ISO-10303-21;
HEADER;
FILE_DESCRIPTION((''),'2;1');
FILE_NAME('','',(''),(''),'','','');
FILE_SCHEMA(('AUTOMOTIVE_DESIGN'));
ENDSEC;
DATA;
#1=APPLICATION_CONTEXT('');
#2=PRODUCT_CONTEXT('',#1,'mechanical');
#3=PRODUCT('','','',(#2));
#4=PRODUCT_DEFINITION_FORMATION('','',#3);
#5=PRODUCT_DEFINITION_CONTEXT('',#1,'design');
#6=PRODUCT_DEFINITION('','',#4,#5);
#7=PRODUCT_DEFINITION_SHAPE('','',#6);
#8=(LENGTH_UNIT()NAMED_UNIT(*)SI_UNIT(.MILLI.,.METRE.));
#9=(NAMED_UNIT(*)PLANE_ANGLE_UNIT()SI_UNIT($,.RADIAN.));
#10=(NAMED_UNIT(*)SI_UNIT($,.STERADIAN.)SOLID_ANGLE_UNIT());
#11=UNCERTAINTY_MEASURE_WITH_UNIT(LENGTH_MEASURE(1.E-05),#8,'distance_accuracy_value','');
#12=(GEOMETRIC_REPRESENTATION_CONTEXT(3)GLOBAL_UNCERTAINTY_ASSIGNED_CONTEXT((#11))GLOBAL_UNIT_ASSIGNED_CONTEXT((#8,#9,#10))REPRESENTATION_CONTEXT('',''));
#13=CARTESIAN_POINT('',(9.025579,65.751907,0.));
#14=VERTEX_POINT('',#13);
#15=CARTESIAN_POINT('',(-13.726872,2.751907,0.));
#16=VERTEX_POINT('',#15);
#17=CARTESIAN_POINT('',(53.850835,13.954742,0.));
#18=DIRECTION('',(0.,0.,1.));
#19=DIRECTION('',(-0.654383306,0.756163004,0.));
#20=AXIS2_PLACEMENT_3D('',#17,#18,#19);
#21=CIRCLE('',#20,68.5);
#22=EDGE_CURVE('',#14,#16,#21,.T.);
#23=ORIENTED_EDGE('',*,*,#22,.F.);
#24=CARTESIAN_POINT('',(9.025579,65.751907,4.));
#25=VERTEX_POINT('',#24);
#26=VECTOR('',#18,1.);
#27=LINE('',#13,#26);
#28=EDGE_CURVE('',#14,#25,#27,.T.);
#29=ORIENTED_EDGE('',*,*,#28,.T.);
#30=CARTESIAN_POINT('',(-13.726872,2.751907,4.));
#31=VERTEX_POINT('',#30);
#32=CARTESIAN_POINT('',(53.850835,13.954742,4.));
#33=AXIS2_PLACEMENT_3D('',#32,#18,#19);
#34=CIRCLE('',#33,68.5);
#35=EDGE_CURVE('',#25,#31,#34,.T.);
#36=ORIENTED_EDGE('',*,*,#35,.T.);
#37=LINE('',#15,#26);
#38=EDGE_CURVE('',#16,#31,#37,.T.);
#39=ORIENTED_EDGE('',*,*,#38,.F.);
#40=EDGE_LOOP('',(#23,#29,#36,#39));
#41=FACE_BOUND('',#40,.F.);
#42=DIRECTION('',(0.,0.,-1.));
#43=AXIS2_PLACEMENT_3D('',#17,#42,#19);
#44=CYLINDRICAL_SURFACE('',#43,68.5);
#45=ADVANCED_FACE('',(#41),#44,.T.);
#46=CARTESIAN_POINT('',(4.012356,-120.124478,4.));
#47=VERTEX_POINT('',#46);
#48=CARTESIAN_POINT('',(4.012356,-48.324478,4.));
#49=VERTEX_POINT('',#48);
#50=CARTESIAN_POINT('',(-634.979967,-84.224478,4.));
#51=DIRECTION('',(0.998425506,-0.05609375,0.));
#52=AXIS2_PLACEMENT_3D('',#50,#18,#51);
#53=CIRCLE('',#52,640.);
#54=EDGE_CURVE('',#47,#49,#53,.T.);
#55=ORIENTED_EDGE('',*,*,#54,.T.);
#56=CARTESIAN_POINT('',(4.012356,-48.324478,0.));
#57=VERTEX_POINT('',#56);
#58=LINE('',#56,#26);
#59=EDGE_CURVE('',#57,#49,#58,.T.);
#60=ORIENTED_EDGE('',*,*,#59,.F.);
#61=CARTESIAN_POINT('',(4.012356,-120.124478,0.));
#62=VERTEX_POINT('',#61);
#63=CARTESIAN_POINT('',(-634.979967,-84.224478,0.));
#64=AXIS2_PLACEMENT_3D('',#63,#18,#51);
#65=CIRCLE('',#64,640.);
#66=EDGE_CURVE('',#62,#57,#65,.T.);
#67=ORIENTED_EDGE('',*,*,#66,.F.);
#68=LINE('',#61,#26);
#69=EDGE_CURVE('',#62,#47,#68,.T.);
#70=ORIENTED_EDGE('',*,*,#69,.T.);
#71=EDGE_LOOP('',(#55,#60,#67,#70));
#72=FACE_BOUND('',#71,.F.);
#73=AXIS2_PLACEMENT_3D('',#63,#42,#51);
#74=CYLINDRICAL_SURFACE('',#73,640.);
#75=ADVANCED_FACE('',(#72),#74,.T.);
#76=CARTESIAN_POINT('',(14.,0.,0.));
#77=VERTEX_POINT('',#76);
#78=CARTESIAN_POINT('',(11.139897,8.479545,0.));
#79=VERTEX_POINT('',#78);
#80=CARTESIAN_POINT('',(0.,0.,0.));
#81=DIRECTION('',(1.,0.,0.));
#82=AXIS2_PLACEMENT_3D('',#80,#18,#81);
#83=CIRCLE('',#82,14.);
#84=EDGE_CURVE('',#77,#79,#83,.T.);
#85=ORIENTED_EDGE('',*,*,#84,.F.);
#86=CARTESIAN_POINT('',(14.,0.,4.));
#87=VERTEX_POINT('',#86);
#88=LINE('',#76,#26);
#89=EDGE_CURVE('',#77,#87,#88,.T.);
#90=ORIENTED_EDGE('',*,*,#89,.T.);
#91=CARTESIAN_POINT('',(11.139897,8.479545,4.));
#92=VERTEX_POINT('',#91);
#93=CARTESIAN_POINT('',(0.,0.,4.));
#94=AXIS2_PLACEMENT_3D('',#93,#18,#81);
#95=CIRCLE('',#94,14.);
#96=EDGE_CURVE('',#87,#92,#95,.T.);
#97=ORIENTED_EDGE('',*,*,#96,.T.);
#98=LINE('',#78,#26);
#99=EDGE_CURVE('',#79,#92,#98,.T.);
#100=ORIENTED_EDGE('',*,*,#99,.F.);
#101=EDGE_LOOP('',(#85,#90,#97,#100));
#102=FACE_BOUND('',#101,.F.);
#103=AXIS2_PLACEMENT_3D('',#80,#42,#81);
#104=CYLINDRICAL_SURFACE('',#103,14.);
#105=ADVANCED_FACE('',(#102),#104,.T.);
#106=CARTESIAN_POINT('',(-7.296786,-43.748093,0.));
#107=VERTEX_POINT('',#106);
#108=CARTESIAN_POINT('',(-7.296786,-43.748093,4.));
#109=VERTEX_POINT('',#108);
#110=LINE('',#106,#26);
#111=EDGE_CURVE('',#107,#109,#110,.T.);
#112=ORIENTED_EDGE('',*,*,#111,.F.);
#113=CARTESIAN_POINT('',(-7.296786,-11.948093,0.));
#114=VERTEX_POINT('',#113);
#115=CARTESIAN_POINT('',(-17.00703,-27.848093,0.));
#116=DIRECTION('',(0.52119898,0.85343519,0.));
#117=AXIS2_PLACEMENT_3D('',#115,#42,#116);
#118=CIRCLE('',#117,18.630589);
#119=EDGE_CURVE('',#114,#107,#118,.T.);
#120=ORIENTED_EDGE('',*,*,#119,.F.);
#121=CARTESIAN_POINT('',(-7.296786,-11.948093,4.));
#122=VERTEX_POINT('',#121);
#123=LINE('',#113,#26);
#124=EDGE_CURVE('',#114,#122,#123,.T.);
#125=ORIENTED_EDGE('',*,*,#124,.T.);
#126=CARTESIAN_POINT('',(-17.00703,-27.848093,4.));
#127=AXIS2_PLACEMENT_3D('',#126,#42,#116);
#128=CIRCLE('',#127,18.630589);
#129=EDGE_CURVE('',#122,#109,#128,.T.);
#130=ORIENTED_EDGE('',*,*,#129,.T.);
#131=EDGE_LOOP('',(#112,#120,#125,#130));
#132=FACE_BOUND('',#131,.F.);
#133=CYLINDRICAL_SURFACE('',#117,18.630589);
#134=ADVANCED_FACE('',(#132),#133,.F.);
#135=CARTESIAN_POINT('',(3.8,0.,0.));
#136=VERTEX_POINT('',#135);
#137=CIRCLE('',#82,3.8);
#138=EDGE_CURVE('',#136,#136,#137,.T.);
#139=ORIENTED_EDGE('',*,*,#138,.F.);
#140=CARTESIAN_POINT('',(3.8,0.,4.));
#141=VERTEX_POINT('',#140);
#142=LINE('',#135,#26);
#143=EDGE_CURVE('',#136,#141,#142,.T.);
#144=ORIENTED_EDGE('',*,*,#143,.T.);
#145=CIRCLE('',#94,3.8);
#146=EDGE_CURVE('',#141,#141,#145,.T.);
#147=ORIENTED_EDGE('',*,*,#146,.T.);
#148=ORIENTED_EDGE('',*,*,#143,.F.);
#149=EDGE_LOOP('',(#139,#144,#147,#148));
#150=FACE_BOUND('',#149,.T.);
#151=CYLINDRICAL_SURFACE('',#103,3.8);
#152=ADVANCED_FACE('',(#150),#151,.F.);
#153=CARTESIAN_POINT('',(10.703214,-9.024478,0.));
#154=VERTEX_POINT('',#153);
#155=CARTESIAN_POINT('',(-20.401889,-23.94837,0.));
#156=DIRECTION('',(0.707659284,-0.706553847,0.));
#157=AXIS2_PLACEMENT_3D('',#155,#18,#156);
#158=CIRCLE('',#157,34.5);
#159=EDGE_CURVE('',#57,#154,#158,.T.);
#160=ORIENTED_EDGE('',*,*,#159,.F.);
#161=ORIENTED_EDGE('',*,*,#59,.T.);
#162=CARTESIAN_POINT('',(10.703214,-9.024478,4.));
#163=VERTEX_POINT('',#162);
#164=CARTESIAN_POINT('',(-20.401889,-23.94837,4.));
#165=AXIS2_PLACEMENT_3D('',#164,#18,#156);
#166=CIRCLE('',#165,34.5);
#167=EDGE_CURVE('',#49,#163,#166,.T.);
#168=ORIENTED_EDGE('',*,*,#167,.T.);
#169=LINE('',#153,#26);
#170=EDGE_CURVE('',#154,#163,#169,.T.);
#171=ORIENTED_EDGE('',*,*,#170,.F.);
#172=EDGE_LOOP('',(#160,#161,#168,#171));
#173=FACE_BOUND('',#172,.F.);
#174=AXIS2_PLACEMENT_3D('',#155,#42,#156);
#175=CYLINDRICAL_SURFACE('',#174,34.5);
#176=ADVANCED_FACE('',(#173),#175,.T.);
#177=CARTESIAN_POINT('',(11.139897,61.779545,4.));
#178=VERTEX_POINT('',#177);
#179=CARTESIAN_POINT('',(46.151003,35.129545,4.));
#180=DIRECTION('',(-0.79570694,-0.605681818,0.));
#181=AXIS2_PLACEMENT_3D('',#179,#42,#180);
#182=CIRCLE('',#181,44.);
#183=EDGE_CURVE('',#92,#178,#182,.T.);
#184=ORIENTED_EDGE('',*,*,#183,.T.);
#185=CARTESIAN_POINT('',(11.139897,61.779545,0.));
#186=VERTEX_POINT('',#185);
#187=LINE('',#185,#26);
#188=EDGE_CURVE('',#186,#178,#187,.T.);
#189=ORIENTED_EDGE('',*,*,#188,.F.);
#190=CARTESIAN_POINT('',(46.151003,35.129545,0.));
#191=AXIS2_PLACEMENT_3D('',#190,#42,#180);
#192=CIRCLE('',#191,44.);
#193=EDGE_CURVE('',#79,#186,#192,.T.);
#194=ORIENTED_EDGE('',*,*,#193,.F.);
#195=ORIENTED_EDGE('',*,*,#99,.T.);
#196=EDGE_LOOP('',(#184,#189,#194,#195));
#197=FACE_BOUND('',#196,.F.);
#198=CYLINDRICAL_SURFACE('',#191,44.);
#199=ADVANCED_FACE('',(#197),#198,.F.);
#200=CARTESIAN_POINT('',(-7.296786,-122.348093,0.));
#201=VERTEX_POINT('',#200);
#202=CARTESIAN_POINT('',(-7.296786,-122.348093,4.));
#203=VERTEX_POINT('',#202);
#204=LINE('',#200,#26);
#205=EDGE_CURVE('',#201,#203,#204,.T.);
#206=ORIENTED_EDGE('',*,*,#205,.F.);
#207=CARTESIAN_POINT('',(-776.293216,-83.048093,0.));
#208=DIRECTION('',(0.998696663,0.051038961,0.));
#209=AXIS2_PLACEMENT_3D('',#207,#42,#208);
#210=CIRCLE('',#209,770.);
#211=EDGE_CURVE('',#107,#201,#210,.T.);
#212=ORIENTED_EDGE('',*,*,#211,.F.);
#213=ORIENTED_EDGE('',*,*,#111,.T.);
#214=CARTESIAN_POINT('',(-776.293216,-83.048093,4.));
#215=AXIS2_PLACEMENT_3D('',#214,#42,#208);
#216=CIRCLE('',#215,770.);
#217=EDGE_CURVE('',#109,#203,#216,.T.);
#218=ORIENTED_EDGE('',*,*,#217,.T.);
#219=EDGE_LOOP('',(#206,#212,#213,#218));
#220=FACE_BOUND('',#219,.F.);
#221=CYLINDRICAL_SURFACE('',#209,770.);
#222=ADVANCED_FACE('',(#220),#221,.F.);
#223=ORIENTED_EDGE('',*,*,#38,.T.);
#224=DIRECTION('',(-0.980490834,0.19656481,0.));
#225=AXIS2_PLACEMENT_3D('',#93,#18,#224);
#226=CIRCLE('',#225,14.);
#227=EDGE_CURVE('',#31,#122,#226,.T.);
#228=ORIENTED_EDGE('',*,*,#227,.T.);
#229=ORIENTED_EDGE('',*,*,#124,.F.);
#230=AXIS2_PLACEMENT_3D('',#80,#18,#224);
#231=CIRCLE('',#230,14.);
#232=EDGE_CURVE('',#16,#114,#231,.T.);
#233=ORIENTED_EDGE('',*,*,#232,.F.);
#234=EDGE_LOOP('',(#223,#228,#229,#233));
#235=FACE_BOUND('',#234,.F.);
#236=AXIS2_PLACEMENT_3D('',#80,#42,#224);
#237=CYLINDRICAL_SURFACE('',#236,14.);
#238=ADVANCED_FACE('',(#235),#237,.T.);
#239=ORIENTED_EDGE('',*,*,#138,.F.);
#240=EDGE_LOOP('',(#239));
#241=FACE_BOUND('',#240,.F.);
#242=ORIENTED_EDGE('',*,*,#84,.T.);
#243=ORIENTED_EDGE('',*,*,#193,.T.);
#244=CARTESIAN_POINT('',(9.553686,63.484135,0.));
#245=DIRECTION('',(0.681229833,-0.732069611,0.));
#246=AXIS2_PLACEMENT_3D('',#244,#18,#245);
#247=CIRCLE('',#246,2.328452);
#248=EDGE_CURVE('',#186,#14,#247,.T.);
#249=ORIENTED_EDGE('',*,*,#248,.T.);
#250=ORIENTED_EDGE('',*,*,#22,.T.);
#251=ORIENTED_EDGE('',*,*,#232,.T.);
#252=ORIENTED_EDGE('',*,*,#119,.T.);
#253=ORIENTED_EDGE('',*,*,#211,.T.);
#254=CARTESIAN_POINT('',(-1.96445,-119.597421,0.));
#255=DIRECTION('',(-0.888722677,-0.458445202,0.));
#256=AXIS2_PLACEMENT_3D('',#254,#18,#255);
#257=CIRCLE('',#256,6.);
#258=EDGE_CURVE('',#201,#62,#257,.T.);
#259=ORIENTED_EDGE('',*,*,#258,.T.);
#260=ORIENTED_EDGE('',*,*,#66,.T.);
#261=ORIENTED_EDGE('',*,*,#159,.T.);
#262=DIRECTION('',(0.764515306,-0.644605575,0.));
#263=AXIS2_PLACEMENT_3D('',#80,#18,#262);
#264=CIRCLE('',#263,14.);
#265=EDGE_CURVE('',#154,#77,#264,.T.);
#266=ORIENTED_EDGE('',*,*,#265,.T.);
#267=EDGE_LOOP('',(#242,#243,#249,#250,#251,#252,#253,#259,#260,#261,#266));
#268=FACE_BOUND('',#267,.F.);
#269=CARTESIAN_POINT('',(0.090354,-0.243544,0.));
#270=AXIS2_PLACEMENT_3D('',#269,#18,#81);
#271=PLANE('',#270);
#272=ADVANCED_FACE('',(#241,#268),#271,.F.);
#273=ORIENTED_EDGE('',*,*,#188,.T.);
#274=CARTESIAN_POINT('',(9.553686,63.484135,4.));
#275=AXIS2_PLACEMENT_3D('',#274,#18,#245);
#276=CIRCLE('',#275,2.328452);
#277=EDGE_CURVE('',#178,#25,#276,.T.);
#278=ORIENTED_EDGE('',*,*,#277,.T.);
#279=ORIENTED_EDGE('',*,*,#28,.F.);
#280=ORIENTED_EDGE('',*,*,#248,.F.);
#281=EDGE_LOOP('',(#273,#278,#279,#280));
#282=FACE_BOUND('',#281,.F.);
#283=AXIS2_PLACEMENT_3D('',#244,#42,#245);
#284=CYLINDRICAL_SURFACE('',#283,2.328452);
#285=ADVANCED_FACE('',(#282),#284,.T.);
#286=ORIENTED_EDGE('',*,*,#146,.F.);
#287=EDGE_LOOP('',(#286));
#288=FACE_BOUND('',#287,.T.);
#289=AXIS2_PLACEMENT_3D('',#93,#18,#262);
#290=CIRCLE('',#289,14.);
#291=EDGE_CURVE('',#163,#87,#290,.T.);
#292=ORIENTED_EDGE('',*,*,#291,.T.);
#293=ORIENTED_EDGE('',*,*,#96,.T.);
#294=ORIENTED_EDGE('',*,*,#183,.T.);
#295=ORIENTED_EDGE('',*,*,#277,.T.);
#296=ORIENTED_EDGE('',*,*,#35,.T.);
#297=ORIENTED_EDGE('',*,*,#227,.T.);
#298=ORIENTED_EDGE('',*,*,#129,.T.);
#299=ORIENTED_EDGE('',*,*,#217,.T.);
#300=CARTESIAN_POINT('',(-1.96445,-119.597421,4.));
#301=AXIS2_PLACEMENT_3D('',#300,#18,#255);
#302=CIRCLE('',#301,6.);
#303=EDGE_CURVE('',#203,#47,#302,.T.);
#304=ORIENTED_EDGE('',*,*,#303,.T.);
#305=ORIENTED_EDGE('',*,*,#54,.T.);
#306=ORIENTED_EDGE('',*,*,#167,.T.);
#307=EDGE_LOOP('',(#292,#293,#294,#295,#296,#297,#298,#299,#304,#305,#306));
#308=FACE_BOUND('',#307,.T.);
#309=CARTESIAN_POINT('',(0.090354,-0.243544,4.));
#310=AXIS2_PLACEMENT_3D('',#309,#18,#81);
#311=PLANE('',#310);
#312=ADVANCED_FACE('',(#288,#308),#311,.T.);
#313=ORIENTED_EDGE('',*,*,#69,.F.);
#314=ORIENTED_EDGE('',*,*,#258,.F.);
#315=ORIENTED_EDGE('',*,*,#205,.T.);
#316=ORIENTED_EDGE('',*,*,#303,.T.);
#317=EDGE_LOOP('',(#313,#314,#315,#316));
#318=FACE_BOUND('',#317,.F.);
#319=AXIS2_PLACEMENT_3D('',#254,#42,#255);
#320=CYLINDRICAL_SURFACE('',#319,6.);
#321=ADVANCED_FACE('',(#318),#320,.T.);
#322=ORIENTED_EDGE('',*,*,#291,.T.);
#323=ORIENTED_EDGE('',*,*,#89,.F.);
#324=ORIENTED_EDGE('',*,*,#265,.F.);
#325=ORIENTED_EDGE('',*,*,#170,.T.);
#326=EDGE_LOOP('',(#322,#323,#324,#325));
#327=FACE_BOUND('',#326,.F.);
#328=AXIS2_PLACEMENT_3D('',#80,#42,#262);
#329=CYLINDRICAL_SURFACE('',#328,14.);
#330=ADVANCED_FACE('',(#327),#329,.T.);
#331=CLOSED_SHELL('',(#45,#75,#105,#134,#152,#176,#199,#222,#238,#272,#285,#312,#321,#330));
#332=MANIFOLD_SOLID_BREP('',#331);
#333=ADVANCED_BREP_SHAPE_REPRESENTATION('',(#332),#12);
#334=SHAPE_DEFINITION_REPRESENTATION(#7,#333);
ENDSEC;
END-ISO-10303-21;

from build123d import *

# Parameters (mm, degrees)
F0_R     = 3.8
F1_DEPTH = 4


# Not quite as in the source:
# - a feature names something its author has since deleted; it is built from what else it names


with BuildPart() as f1:
    # F0 (on Top) → F1 (new body)
    with BuildSketch(Plane.XY):
        with BuildLine():
            ThreePointArc((10.7032142857, -9.0244780433), (13.15, -4.8039046618), (14, 0))
            ThreePointArc((14, 0), (13.2657182303, 4.4744519031), (11.1398971667, 8.4795454545))
            ThreePointArc((11.1398971667, 8.4795454545), (-3.1423826746, 13.6427794502), (-13.7268716756, 2.7519073388))
            ThreePointArc((-13.7268716756, 2.7519073388), (-12.8265756347, -5.610611151), (-7.2967857143, -11.9480926612))
            ThreePointArc((-7.2967857143, -11.9480926612), (-3.7899012351, -13.4772641374), (0, -14))
            ThreePointArc((0, -14), (5.90158061, -12.6953277352), (10.7032142857, -9.0244780433))
        make_face()
        Circle(F0_R, mode=Mode.SUBTRACT)
        with BuildLine():
            ThreePointArc((4.0123564651, -48.3244780433), (13.6087273384, -29.7387061328), (10.7032142857, -9.0244780433))
            ThreePointArc((10.7032142857, -9.0244780433), (5.90158061, -12.6953277352), (0, -14))
            ThreePointArc((0, -14), (-3.7899012351, -13.4772641374), (-7.2967857143, -11.9480926612))
            ThreePointArc((-7.2967857143, -11.9480926612), (1.6235591613, -27.8480926612), (-7.2967857143, -43.7480926612))
            ThreePointArc((-7.2967857143, -43.7480926612), (-6.2932161351, -83.0480926612), (-7.2967857143, -122.3480926612))
            ThreePointArc((-7.2967857143, -122.3480926612), (-0.8068871669, -125.4847000324), (4.0123564651, -120.1244780433))
            ThreePointArc((4.0123564651, -120.1244780433), (5.0200325676, -84.2244780433), (4.0123564651, -48.3244780433))
        make_face()
        with BuildLine():
            ThreePointArc((-13.7268716756, 2.7519073388), (-3.1423826746, 13.6427794502), (11.1398971667, 8.4795454545))
            ThreePointArc((11.1398971667, 8.4795454545), (2.1510025477, 35.1295454545), (11.1398971667, 61.7795454545))
            ThreePointArc((11.1398971667, 61.7795454545), (11.6091204752, 64.5781543581), (9.0255790591, 65.7519073388))
            ThreePointArc((9.0255790591, 65.7519073388), (-10.5763059667, 37.2226044204), (-13.7268716756, 2.7519073388))
        make_face()
    extrude(amount=F1_DEPTH)


solid = f1.part
